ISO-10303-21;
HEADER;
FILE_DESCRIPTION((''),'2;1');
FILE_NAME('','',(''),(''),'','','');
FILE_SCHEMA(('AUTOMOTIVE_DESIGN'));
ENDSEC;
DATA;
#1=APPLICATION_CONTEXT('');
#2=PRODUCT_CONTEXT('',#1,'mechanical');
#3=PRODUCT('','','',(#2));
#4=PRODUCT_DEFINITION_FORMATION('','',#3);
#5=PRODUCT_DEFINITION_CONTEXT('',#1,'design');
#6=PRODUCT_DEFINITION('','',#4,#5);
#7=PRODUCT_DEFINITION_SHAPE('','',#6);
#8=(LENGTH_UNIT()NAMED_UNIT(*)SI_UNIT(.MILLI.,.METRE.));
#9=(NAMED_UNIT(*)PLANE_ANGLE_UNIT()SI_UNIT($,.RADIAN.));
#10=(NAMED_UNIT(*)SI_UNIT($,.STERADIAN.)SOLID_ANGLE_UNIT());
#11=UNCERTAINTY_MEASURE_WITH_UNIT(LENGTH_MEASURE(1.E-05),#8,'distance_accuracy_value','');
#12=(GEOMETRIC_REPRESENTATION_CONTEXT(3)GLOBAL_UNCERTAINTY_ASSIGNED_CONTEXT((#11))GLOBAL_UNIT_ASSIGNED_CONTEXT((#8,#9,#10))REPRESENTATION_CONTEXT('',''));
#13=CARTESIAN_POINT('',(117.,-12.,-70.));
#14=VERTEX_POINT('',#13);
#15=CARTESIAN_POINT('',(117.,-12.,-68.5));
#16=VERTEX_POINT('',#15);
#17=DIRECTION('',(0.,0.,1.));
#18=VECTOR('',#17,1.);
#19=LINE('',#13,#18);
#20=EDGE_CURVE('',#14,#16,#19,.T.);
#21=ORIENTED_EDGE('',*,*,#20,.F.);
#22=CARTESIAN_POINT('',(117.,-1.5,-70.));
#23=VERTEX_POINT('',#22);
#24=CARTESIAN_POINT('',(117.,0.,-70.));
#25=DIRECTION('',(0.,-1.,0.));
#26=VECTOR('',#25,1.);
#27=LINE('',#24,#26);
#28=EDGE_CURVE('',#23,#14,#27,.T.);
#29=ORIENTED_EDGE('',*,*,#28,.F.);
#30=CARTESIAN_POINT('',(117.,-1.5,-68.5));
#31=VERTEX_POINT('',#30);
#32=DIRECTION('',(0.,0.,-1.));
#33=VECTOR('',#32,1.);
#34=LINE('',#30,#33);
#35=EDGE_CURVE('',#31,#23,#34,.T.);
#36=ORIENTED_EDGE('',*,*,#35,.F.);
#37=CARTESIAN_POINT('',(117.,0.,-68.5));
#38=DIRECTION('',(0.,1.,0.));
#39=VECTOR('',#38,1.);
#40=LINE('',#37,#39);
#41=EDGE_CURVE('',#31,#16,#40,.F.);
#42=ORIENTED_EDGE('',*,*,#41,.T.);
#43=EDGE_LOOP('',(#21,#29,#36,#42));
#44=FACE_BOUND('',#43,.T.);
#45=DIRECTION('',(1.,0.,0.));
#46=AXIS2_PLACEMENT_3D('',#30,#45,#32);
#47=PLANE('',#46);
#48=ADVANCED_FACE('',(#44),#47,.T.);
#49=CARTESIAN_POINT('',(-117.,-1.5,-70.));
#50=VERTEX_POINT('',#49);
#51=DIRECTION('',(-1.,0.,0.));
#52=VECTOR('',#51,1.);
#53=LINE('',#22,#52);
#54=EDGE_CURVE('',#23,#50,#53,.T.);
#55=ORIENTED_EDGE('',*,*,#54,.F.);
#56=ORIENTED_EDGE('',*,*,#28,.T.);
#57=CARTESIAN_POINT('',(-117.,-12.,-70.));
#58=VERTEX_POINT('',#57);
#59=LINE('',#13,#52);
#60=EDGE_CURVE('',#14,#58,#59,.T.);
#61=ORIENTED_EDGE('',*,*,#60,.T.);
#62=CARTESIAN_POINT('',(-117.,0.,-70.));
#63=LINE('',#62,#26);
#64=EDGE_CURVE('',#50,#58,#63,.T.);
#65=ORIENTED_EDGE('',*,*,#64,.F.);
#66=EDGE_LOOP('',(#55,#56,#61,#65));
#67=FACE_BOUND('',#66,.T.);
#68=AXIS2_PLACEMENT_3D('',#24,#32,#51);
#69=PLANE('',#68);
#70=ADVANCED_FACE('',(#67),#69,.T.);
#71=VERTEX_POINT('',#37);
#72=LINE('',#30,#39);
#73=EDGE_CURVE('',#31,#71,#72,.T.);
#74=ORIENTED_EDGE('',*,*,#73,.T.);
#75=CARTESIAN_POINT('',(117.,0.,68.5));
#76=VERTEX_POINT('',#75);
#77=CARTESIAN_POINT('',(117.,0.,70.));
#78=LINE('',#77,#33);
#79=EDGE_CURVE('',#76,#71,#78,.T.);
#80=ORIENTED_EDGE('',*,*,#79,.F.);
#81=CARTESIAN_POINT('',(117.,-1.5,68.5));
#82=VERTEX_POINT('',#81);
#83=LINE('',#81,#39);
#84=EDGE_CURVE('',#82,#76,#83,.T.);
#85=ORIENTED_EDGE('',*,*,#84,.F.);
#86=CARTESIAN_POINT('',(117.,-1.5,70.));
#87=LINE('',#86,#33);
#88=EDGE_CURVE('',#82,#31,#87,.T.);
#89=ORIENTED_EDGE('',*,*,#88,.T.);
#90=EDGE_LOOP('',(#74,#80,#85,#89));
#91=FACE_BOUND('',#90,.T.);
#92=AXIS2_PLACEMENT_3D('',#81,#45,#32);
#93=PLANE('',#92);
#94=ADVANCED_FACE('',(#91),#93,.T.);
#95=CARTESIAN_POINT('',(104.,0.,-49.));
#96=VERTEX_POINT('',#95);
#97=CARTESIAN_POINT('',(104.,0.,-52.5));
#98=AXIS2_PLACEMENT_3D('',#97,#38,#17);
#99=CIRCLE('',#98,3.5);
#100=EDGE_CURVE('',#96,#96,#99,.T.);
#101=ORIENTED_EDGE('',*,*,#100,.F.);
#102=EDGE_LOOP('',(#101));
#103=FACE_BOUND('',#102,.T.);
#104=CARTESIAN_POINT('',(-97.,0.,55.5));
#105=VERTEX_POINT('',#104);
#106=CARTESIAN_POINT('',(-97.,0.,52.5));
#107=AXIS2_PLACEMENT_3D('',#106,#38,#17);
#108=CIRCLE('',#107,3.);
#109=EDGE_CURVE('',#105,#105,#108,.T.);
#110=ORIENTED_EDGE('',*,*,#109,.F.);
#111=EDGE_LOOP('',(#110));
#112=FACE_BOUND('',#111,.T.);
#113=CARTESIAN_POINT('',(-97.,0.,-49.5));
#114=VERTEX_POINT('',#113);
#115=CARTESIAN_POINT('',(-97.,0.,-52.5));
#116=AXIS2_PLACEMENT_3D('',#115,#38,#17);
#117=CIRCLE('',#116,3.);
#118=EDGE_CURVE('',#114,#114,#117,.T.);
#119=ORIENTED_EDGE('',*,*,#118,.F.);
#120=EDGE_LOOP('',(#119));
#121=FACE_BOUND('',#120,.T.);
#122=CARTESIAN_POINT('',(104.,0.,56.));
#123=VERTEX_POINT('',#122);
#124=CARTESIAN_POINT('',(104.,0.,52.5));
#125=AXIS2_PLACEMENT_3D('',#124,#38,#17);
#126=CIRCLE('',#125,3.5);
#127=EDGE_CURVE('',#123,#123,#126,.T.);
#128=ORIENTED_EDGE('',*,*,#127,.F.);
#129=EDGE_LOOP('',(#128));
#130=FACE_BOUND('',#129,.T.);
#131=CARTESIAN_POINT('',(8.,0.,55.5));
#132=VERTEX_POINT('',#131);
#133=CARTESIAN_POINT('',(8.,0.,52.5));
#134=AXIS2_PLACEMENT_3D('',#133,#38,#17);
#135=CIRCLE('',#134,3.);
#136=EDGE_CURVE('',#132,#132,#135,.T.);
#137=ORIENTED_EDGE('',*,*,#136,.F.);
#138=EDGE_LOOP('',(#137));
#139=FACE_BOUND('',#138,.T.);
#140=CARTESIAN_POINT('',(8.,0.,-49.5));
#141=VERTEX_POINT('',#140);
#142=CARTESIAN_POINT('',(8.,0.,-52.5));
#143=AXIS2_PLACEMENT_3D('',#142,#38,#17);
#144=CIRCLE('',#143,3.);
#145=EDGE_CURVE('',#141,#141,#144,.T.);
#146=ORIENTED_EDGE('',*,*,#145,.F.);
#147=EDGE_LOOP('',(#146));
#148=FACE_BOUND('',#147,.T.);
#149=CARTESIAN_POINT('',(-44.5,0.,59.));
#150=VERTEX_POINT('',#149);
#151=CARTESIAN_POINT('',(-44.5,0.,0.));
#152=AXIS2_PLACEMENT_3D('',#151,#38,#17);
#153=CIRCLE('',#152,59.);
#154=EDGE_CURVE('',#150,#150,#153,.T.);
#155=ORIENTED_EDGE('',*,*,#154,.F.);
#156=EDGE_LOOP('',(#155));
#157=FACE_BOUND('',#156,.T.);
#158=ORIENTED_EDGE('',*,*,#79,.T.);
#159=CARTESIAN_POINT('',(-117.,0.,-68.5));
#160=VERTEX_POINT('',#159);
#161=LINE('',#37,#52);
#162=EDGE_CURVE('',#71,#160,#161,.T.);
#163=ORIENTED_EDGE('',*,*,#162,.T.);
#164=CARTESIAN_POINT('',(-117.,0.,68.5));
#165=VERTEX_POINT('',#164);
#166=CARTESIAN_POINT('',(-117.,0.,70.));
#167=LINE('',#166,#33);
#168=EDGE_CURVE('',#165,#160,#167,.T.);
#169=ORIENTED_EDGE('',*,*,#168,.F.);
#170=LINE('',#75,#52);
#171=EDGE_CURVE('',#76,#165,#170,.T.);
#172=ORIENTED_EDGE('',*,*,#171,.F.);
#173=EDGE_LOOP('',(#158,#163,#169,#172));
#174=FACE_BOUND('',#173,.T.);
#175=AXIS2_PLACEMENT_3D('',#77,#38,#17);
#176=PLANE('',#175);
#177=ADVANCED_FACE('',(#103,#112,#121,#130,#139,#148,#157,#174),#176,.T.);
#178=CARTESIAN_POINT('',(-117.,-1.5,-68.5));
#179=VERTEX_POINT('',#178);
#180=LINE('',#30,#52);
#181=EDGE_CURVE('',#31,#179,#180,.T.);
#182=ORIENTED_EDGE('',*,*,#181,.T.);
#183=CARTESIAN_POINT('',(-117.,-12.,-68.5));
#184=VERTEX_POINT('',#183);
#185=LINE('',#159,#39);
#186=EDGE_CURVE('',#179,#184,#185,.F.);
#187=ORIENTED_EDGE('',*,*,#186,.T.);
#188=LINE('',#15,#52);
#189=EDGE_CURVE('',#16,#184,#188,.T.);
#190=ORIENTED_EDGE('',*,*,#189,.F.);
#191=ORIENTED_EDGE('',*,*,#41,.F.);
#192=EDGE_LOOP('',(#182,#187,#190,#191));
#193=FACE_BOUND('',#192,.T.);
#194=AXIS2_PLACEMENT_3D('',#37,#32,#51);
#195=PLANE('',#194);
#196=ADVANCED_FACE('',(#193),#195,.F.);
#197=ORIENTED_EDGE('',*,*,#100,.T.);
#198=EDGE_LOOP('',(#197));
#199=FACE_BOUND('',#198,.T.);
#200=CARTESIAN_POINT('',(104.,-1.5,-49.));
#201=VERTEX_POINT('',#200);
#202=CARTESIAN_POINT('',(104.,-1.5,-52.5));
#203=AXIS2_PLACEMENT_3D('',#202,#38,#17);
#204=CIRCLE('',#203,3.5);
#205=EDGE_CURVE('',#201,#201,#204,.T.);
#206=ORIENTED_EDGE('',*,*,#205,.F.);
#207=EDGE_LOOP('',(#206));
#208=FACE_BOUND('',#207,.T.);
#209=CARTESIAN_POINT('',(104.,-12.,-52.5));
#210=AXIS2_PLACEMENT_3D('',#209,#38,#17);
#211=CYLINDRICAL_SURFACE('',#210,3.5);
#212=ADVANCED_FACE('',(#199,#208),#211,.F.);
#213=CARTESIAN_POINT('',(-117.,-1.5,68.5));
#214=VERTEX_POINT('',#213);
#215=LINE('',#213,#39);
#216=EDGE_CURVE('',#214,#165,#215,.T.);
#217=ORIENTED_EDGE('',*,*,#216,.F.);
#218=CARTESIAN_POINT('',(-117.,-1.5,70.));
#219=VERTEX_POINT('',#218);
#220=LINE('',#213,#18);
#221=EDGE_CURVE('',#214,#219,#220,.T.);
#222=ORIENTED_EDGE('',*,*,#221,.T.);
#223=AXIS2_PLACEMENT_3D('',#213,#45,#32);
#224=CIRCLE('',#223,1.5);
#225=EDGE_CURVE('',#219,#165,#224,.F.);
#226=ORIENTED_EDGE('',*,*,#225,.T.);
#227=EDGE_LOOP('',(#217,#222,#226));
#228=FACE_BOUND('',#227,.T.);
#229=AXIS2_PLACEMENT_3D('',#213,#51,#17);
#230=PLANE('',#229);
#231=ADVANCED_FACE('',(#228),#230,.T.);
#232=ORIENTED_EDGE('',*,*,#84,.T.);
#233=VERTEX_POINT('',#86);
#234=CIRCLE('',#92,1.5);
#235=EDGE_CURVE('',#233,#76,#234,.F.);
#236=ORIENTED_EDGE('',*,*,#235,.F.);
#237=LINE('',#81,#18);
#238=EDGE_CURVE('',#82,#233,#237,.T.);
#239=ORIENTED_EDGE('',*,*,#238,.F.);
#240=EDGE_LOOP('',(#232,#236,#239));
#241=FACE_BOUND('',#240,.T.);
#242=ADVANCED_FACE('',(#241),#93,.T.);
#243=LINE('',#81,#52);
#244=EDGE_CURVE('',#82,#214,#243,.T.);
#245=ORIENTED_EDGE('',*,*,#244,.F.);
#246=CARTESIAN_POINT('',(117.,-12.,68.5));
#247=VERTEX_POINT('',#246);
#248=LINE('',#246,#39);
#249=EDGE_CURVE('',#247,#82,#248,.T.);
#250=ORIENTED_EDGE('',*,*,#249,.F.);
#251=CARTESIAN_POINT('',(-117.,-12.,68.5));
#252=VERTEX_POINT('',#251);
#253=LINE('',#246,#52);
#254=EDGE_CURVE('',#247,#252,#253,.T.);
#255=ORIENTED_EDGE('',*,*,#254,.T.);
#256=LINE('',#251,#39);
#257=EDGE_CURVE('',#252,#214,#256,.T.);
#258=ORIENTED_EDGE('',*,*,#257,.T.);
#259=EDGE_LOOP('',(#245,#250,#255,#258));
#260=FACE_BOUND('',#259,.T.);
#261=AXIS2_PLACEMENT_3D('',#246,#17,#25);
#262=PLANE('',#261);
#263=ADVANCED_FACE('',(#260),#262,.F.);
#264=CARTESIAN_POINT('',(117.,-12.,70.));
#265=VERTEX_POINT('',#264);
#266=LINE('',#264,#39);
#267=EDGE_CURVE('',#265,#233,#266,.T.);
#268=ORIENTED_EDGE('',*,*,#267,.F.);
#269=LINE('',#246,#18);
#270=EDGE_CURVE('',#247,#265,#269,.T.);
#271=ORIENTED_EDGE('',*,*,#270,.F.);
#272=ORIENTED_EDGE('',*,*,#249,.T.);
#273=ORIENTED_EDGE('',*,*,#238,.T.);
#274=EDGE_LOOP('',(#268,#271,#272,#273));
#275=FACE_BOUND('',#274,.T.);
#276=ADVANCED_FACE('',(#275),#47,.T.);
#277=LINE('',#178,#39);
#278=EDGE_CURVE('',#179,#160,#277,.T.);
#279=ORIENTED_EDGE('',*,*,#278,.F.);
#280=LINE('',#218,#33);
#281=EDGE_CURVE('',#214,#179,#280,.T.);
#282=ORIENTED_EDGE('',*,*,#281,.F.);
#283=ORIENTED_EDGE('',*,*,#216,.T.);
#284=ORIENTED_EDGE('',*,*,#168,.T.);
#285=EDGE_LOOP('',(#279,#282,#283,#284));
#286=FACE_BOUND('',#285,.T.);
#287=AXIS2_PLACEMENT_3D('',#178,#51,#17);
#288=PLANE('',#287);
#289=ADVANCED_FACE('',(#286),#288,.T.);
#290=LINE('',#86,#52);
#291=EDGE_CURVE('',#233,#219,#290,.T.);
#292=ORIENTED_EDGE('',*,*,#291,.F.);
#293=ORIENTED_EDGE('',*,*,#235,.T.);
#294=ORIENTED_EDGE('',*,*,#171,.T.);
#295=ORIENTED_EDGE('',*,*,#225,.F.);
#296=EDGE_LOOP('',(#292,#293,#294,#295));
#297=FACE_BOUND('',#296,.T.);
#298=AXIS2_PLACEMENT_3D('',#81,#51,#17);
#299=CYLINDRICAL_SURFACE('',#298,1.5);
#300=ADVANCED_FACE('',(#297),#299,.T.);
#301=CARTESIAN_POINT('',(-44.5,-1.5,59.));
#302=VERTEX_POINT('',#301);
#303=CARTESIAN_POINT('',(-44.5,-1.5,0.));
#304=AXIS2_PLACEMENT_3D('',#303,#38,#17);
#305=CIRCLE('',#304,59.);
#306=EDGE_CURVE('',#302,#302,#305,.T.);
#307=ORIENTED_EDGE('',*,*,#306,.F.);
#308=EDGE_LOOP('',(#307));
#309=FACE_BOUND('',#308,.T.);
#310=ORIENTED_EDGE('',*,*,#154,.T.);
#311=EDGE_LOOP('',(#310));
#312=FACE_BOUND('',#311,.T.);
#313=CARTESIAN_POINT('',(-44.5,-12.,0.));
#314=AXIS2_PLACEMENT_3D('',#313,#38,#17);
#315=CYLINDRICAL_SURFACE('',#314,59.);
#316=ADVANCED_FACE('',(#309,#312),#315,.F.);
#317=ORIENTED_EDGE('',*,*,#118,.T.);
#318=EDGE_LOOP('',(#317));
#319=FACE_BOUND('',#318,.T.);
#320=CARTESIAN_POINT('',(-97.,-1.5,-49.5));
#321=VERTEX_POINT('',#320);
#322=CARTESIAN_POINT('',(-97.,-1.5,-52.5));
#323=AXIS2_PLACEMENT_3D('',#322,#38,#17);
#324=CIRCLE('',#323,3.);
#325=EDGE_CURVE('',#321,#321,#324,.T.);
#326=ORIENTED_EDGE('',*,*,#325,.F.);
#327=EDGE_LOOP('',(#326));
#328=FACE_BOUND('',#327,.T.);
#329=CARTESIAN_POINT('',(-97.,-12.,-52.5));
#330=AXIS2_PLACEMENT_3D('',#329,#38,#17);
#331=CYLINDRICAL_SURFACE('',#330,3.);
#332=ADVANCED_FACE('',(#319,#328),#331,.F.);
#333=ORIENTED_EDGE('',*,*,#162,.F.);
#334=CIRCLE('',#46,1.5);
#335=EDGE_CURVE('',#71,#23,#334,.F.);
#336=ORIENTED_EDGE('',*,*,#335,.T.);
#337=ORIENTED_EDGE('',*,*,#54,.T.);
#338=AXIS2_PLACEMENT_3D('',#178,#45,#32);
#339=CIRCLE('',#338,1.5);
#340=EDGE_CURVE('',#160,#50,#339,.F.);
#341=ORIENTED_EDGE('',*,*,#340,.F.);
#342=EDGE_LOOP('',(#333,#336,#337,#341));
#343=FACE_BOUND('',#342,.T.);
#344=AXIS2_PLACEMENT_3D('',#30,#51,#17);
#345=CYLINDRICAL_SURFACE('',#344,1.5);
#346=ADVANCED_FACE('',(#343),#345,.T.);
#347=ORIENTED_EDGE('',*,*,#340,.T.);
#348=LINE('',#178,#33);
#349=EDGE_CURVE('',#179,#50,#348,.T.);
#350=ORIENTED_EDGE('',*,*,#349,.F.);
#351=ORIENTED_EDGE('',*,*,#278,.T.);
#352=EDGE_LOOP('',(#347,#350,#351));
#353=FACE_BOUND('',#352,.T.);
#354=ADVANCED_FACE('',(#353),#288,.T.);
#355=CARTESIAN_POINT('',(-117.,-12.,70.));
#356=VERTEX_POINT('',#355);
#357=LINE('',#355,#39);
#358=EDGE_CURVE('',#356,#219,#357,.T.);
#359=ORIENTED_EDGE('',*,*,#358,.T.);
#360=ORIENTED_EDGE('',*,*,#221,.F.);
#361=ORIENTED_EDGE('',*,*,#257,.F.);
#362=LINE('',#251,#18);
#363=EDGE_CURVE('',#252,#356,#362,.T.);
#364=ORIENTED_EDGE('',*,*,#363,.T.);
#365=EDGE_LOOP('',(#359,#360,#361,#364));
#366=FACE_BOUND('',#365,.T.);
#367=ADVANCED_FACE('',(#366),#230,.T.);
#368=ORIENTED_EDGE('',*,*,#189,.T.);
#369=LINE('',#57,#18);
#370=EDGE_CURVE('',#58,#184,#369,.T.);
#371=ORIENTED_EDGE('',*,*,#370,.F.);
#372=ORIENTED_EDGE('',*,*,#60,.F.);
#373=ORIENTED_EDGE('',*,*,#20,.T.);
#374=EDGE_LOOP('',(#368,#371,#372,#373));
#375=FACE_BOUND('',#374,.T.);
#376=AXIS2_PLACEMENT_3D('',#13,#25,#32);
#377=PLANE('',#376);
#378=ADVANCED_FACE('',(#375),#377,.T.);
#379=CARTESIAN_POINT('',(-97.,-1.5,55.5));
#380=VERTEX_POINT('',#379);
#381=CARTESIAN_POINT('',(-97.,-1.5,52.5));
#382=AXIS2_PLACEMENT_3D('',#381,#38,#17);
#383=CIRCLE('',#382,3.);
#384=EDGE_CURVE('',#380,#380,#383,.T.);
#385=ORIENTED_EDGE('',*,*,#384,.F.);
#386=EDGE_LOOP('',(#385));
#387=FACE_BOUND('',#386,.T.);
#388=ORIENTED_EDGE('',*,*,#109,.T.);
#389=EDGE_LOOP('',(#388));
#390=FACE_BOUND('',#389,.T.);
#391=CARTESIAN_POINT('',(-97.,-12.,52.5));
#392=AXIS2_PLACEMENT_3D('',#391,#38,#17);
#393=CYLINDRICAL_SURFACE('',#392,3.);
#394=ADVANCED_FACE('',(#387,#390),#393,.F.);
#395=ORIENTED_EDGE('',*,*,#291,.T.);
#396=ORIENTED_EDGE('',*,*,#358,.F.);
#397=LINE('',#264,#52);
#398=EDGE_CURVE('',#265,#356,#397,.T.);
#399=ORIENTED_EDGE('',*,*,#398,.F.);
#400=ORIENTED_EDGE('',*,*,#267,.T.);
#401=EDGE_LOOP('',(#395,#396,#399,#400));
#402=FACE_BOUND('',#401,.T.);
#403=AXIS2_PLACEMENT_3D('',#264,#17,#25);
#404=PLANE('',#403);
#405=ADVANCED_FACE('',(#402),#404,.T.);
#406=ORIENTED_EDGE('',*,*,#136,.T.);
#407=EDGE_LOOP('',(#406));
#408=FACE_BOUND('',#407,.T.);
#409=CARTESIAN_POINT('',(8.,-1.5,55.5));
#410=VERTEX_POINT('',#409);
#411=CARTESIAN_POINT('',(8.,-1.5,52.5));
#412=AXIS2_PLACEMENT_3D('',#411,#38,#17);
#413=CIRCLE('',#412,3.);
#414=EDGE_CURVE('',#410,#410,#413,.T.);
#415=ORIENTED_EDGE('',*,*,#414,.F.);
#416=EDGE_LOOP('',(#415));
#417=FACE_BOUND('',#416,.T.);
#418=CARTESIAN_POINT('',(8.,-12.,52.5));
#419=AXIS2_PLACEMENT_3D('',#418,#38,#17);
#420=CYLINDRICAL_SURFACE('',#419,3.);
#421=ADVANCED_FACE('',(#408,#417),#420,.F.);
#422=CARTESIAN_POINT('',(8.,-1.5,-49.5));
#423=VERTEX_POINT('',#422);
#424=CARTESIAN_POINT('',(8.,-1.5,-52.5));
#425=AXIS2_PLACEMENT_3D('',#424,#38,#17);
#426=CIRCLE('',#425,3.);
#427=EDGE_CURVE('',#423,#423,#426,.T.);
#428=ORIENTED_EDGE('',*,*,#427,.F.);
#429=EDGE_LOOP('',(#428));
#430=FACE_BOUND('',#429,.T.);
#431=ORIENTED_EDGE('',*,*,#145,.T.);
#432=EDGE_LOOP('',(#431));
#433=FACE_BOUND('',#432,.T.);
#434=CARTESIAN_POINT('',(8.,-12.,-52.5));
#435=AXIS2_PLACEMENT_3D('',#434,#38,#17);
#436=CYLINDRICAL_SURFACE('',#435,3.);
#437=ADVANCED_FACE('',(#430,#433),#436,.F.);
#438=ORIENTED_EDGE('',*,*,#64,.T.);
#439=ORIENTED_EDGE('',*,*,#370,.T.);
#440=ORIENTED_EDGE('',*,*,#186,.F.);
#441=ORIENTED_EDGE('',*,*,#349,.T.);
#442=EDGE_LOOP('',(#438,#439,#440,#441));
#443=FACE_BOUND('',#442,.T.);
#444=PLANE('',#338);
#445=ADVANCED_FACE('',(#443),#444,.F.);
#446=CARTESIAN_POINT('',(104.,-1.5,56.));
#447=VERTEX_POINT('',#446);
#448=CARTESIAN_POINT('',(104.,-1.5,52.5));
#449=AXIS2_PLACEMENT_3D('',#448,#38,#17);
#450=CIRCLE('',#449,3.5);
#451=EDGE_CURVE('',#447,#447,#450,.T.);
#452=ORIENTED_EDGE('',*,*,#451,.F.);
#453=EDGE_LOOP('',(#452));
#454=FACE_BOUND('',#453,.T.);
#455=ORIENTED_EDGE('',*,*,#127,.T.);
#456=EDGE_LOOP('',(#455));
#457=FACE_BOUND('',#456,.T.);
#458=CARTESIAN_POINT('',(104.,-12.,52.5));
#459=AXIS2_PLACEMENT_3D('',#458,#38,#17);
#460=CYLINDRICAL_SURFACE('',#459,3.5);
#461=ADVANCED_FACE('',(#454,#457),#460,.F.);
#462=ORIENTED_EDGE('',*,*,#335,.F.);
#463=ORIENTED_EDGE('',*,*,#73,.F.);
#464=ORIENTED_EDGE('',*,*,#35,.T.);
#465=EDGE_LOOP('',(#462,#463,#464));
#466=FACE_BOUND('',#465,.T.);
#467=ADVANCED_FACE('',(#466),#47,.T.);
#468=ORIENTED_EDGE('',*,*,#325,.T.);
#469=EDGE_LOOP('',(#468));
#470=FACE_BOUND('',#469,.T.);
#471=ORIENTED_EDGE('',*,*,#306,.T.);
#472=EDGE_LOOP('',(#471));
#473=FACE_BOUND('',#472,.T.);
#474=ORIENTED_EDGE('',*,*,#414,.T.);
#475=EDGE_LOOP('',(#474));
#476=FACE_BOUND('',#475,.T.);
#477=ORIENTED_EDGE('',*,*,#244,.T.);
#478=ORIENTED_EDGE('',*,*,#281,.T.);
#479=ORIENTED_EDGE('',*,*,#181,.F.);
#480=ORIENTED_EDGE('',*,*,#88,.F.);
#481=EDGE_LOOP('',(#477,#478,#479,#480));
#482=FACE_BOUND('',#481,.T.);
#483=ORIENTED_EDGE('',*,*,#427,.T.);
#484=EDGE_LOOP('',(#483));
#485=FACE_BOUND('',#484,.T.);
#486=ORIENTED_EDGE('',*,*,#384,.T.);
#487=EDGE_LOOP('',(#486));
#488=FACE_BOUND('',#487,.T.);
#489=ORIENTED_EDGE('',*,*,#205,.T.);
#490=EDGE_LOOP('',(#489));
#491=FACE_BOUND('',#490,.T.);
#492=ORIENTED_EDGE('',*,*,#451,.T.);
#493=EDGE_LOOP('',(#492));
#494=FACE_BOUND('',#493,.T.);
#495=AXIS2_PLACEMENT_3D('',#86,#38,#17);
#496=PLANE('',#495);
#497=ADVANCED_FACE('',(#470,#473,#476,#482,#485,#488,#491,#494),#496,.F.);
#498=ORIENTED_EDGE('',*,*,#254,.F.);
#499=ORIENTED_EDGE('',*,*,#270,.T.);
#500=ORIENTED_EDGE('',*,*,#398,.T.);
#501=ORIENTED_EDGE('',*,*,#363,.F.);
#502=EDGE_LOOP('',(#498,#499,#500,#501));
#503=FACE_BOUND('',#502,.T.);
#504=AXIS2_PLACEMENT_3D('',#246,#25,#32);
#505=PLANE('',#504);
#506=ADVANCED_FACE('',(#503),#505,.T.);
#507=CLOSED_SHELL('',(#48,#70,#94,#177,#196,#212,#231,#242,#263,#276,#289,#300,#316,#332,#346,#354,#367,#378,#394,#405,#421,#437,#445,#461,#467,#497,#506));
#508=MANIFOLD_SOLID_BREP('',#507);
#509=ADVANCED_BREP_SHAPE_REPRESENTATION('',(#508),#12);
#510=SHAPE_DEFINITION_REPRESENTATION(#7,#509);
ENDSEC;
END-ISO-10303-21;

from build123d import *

# Parameters (mm, degrees)
SM_START               = -117
SM_BASE_FLANGE_1_DEPTH = 234
SKETCH_7_R             = 59
SKETCH_7_R_2           = 3
SKETCH_7_R_3           = 3.5
CUT_EXTRUDE_1_DEPTH    = 137.868550076


# Read off the part's stored shape, not the designer's step: 基体-法兰1
with BuildPart() as part:
    # 基体-法兰1 outline → 基体-法兰1 (new body)
    with BuildSketch(Plane(origin=(0, 0, 0), x_dir=(0, 0, -1), z_dir=(1, 0, 0)).offset(SM_START)):
        with BuildLine():
            Line((68.5, -1.5), (68.5, -12))
            Line((68.5, -12), (70, -12))
            Line((70, -12), (70, -1.5))
            ThreePointArc((70, -1.5), (69.560660172, -0.439339828), (68.5, 0))
            Line((68.5, 0), (-68.5, 0))
            ThreePointArc((-68.5, 0), (-69.560660172, -0.439339828), (-70, -1.5))
            Line((-70, -1.5), (-70, -12))
            Line((-70, -12), (-68.5, -12))
            Line((-68.5, -12), (-68.5, -1.5))
            Line((-68.5, -1.5), (68.5, -1.5))
        make_face()
    extrude(amount=SM_BASE_FLANGE_1_DEPTH)

    # 草图7 → 切除-拉伸1 (cut, through all)
    with BuildSketch(Plane(origin=(0, 0, 0), x_dir=(1, 0, 0), z_dir=(0, 1, 0))):
        with Locations(Location((-44.5, 0, 0), (0, 0, 270))):
            Circle(SKETCH_7_R)
        with Locations(Location((-97, 52.5, 0), (0, 0, 270))):
            Circle(SKETCH_7_R_2)
        with Locations(Location((8, 52.5, 0), (0, 0, 270))):
            Circle(SKETCH_7_R_2)
        with Locations(Location((8, -52.5, 0), (0, 0, 270))):
            Circle(SKETCH_7_R_2)
        with Locations(Location((-97, -52.5, 0), (0, 0, 270))):
            Circle(SKETCH_7_R_2)
        with Locations(Location((104, 52.5, 0), (0, 0, 270))):
            Circle(SKETCH_7_R_3)
        with Locations(Location((104, -52.5, 0), (0, 0, 270))):
            Circle(SKETCH_7_R_3)
    extrude(amount=-CUT_EXTRUDE_1_DEPTH, mode=Mode.SUBTRACT)


solid = part.part
